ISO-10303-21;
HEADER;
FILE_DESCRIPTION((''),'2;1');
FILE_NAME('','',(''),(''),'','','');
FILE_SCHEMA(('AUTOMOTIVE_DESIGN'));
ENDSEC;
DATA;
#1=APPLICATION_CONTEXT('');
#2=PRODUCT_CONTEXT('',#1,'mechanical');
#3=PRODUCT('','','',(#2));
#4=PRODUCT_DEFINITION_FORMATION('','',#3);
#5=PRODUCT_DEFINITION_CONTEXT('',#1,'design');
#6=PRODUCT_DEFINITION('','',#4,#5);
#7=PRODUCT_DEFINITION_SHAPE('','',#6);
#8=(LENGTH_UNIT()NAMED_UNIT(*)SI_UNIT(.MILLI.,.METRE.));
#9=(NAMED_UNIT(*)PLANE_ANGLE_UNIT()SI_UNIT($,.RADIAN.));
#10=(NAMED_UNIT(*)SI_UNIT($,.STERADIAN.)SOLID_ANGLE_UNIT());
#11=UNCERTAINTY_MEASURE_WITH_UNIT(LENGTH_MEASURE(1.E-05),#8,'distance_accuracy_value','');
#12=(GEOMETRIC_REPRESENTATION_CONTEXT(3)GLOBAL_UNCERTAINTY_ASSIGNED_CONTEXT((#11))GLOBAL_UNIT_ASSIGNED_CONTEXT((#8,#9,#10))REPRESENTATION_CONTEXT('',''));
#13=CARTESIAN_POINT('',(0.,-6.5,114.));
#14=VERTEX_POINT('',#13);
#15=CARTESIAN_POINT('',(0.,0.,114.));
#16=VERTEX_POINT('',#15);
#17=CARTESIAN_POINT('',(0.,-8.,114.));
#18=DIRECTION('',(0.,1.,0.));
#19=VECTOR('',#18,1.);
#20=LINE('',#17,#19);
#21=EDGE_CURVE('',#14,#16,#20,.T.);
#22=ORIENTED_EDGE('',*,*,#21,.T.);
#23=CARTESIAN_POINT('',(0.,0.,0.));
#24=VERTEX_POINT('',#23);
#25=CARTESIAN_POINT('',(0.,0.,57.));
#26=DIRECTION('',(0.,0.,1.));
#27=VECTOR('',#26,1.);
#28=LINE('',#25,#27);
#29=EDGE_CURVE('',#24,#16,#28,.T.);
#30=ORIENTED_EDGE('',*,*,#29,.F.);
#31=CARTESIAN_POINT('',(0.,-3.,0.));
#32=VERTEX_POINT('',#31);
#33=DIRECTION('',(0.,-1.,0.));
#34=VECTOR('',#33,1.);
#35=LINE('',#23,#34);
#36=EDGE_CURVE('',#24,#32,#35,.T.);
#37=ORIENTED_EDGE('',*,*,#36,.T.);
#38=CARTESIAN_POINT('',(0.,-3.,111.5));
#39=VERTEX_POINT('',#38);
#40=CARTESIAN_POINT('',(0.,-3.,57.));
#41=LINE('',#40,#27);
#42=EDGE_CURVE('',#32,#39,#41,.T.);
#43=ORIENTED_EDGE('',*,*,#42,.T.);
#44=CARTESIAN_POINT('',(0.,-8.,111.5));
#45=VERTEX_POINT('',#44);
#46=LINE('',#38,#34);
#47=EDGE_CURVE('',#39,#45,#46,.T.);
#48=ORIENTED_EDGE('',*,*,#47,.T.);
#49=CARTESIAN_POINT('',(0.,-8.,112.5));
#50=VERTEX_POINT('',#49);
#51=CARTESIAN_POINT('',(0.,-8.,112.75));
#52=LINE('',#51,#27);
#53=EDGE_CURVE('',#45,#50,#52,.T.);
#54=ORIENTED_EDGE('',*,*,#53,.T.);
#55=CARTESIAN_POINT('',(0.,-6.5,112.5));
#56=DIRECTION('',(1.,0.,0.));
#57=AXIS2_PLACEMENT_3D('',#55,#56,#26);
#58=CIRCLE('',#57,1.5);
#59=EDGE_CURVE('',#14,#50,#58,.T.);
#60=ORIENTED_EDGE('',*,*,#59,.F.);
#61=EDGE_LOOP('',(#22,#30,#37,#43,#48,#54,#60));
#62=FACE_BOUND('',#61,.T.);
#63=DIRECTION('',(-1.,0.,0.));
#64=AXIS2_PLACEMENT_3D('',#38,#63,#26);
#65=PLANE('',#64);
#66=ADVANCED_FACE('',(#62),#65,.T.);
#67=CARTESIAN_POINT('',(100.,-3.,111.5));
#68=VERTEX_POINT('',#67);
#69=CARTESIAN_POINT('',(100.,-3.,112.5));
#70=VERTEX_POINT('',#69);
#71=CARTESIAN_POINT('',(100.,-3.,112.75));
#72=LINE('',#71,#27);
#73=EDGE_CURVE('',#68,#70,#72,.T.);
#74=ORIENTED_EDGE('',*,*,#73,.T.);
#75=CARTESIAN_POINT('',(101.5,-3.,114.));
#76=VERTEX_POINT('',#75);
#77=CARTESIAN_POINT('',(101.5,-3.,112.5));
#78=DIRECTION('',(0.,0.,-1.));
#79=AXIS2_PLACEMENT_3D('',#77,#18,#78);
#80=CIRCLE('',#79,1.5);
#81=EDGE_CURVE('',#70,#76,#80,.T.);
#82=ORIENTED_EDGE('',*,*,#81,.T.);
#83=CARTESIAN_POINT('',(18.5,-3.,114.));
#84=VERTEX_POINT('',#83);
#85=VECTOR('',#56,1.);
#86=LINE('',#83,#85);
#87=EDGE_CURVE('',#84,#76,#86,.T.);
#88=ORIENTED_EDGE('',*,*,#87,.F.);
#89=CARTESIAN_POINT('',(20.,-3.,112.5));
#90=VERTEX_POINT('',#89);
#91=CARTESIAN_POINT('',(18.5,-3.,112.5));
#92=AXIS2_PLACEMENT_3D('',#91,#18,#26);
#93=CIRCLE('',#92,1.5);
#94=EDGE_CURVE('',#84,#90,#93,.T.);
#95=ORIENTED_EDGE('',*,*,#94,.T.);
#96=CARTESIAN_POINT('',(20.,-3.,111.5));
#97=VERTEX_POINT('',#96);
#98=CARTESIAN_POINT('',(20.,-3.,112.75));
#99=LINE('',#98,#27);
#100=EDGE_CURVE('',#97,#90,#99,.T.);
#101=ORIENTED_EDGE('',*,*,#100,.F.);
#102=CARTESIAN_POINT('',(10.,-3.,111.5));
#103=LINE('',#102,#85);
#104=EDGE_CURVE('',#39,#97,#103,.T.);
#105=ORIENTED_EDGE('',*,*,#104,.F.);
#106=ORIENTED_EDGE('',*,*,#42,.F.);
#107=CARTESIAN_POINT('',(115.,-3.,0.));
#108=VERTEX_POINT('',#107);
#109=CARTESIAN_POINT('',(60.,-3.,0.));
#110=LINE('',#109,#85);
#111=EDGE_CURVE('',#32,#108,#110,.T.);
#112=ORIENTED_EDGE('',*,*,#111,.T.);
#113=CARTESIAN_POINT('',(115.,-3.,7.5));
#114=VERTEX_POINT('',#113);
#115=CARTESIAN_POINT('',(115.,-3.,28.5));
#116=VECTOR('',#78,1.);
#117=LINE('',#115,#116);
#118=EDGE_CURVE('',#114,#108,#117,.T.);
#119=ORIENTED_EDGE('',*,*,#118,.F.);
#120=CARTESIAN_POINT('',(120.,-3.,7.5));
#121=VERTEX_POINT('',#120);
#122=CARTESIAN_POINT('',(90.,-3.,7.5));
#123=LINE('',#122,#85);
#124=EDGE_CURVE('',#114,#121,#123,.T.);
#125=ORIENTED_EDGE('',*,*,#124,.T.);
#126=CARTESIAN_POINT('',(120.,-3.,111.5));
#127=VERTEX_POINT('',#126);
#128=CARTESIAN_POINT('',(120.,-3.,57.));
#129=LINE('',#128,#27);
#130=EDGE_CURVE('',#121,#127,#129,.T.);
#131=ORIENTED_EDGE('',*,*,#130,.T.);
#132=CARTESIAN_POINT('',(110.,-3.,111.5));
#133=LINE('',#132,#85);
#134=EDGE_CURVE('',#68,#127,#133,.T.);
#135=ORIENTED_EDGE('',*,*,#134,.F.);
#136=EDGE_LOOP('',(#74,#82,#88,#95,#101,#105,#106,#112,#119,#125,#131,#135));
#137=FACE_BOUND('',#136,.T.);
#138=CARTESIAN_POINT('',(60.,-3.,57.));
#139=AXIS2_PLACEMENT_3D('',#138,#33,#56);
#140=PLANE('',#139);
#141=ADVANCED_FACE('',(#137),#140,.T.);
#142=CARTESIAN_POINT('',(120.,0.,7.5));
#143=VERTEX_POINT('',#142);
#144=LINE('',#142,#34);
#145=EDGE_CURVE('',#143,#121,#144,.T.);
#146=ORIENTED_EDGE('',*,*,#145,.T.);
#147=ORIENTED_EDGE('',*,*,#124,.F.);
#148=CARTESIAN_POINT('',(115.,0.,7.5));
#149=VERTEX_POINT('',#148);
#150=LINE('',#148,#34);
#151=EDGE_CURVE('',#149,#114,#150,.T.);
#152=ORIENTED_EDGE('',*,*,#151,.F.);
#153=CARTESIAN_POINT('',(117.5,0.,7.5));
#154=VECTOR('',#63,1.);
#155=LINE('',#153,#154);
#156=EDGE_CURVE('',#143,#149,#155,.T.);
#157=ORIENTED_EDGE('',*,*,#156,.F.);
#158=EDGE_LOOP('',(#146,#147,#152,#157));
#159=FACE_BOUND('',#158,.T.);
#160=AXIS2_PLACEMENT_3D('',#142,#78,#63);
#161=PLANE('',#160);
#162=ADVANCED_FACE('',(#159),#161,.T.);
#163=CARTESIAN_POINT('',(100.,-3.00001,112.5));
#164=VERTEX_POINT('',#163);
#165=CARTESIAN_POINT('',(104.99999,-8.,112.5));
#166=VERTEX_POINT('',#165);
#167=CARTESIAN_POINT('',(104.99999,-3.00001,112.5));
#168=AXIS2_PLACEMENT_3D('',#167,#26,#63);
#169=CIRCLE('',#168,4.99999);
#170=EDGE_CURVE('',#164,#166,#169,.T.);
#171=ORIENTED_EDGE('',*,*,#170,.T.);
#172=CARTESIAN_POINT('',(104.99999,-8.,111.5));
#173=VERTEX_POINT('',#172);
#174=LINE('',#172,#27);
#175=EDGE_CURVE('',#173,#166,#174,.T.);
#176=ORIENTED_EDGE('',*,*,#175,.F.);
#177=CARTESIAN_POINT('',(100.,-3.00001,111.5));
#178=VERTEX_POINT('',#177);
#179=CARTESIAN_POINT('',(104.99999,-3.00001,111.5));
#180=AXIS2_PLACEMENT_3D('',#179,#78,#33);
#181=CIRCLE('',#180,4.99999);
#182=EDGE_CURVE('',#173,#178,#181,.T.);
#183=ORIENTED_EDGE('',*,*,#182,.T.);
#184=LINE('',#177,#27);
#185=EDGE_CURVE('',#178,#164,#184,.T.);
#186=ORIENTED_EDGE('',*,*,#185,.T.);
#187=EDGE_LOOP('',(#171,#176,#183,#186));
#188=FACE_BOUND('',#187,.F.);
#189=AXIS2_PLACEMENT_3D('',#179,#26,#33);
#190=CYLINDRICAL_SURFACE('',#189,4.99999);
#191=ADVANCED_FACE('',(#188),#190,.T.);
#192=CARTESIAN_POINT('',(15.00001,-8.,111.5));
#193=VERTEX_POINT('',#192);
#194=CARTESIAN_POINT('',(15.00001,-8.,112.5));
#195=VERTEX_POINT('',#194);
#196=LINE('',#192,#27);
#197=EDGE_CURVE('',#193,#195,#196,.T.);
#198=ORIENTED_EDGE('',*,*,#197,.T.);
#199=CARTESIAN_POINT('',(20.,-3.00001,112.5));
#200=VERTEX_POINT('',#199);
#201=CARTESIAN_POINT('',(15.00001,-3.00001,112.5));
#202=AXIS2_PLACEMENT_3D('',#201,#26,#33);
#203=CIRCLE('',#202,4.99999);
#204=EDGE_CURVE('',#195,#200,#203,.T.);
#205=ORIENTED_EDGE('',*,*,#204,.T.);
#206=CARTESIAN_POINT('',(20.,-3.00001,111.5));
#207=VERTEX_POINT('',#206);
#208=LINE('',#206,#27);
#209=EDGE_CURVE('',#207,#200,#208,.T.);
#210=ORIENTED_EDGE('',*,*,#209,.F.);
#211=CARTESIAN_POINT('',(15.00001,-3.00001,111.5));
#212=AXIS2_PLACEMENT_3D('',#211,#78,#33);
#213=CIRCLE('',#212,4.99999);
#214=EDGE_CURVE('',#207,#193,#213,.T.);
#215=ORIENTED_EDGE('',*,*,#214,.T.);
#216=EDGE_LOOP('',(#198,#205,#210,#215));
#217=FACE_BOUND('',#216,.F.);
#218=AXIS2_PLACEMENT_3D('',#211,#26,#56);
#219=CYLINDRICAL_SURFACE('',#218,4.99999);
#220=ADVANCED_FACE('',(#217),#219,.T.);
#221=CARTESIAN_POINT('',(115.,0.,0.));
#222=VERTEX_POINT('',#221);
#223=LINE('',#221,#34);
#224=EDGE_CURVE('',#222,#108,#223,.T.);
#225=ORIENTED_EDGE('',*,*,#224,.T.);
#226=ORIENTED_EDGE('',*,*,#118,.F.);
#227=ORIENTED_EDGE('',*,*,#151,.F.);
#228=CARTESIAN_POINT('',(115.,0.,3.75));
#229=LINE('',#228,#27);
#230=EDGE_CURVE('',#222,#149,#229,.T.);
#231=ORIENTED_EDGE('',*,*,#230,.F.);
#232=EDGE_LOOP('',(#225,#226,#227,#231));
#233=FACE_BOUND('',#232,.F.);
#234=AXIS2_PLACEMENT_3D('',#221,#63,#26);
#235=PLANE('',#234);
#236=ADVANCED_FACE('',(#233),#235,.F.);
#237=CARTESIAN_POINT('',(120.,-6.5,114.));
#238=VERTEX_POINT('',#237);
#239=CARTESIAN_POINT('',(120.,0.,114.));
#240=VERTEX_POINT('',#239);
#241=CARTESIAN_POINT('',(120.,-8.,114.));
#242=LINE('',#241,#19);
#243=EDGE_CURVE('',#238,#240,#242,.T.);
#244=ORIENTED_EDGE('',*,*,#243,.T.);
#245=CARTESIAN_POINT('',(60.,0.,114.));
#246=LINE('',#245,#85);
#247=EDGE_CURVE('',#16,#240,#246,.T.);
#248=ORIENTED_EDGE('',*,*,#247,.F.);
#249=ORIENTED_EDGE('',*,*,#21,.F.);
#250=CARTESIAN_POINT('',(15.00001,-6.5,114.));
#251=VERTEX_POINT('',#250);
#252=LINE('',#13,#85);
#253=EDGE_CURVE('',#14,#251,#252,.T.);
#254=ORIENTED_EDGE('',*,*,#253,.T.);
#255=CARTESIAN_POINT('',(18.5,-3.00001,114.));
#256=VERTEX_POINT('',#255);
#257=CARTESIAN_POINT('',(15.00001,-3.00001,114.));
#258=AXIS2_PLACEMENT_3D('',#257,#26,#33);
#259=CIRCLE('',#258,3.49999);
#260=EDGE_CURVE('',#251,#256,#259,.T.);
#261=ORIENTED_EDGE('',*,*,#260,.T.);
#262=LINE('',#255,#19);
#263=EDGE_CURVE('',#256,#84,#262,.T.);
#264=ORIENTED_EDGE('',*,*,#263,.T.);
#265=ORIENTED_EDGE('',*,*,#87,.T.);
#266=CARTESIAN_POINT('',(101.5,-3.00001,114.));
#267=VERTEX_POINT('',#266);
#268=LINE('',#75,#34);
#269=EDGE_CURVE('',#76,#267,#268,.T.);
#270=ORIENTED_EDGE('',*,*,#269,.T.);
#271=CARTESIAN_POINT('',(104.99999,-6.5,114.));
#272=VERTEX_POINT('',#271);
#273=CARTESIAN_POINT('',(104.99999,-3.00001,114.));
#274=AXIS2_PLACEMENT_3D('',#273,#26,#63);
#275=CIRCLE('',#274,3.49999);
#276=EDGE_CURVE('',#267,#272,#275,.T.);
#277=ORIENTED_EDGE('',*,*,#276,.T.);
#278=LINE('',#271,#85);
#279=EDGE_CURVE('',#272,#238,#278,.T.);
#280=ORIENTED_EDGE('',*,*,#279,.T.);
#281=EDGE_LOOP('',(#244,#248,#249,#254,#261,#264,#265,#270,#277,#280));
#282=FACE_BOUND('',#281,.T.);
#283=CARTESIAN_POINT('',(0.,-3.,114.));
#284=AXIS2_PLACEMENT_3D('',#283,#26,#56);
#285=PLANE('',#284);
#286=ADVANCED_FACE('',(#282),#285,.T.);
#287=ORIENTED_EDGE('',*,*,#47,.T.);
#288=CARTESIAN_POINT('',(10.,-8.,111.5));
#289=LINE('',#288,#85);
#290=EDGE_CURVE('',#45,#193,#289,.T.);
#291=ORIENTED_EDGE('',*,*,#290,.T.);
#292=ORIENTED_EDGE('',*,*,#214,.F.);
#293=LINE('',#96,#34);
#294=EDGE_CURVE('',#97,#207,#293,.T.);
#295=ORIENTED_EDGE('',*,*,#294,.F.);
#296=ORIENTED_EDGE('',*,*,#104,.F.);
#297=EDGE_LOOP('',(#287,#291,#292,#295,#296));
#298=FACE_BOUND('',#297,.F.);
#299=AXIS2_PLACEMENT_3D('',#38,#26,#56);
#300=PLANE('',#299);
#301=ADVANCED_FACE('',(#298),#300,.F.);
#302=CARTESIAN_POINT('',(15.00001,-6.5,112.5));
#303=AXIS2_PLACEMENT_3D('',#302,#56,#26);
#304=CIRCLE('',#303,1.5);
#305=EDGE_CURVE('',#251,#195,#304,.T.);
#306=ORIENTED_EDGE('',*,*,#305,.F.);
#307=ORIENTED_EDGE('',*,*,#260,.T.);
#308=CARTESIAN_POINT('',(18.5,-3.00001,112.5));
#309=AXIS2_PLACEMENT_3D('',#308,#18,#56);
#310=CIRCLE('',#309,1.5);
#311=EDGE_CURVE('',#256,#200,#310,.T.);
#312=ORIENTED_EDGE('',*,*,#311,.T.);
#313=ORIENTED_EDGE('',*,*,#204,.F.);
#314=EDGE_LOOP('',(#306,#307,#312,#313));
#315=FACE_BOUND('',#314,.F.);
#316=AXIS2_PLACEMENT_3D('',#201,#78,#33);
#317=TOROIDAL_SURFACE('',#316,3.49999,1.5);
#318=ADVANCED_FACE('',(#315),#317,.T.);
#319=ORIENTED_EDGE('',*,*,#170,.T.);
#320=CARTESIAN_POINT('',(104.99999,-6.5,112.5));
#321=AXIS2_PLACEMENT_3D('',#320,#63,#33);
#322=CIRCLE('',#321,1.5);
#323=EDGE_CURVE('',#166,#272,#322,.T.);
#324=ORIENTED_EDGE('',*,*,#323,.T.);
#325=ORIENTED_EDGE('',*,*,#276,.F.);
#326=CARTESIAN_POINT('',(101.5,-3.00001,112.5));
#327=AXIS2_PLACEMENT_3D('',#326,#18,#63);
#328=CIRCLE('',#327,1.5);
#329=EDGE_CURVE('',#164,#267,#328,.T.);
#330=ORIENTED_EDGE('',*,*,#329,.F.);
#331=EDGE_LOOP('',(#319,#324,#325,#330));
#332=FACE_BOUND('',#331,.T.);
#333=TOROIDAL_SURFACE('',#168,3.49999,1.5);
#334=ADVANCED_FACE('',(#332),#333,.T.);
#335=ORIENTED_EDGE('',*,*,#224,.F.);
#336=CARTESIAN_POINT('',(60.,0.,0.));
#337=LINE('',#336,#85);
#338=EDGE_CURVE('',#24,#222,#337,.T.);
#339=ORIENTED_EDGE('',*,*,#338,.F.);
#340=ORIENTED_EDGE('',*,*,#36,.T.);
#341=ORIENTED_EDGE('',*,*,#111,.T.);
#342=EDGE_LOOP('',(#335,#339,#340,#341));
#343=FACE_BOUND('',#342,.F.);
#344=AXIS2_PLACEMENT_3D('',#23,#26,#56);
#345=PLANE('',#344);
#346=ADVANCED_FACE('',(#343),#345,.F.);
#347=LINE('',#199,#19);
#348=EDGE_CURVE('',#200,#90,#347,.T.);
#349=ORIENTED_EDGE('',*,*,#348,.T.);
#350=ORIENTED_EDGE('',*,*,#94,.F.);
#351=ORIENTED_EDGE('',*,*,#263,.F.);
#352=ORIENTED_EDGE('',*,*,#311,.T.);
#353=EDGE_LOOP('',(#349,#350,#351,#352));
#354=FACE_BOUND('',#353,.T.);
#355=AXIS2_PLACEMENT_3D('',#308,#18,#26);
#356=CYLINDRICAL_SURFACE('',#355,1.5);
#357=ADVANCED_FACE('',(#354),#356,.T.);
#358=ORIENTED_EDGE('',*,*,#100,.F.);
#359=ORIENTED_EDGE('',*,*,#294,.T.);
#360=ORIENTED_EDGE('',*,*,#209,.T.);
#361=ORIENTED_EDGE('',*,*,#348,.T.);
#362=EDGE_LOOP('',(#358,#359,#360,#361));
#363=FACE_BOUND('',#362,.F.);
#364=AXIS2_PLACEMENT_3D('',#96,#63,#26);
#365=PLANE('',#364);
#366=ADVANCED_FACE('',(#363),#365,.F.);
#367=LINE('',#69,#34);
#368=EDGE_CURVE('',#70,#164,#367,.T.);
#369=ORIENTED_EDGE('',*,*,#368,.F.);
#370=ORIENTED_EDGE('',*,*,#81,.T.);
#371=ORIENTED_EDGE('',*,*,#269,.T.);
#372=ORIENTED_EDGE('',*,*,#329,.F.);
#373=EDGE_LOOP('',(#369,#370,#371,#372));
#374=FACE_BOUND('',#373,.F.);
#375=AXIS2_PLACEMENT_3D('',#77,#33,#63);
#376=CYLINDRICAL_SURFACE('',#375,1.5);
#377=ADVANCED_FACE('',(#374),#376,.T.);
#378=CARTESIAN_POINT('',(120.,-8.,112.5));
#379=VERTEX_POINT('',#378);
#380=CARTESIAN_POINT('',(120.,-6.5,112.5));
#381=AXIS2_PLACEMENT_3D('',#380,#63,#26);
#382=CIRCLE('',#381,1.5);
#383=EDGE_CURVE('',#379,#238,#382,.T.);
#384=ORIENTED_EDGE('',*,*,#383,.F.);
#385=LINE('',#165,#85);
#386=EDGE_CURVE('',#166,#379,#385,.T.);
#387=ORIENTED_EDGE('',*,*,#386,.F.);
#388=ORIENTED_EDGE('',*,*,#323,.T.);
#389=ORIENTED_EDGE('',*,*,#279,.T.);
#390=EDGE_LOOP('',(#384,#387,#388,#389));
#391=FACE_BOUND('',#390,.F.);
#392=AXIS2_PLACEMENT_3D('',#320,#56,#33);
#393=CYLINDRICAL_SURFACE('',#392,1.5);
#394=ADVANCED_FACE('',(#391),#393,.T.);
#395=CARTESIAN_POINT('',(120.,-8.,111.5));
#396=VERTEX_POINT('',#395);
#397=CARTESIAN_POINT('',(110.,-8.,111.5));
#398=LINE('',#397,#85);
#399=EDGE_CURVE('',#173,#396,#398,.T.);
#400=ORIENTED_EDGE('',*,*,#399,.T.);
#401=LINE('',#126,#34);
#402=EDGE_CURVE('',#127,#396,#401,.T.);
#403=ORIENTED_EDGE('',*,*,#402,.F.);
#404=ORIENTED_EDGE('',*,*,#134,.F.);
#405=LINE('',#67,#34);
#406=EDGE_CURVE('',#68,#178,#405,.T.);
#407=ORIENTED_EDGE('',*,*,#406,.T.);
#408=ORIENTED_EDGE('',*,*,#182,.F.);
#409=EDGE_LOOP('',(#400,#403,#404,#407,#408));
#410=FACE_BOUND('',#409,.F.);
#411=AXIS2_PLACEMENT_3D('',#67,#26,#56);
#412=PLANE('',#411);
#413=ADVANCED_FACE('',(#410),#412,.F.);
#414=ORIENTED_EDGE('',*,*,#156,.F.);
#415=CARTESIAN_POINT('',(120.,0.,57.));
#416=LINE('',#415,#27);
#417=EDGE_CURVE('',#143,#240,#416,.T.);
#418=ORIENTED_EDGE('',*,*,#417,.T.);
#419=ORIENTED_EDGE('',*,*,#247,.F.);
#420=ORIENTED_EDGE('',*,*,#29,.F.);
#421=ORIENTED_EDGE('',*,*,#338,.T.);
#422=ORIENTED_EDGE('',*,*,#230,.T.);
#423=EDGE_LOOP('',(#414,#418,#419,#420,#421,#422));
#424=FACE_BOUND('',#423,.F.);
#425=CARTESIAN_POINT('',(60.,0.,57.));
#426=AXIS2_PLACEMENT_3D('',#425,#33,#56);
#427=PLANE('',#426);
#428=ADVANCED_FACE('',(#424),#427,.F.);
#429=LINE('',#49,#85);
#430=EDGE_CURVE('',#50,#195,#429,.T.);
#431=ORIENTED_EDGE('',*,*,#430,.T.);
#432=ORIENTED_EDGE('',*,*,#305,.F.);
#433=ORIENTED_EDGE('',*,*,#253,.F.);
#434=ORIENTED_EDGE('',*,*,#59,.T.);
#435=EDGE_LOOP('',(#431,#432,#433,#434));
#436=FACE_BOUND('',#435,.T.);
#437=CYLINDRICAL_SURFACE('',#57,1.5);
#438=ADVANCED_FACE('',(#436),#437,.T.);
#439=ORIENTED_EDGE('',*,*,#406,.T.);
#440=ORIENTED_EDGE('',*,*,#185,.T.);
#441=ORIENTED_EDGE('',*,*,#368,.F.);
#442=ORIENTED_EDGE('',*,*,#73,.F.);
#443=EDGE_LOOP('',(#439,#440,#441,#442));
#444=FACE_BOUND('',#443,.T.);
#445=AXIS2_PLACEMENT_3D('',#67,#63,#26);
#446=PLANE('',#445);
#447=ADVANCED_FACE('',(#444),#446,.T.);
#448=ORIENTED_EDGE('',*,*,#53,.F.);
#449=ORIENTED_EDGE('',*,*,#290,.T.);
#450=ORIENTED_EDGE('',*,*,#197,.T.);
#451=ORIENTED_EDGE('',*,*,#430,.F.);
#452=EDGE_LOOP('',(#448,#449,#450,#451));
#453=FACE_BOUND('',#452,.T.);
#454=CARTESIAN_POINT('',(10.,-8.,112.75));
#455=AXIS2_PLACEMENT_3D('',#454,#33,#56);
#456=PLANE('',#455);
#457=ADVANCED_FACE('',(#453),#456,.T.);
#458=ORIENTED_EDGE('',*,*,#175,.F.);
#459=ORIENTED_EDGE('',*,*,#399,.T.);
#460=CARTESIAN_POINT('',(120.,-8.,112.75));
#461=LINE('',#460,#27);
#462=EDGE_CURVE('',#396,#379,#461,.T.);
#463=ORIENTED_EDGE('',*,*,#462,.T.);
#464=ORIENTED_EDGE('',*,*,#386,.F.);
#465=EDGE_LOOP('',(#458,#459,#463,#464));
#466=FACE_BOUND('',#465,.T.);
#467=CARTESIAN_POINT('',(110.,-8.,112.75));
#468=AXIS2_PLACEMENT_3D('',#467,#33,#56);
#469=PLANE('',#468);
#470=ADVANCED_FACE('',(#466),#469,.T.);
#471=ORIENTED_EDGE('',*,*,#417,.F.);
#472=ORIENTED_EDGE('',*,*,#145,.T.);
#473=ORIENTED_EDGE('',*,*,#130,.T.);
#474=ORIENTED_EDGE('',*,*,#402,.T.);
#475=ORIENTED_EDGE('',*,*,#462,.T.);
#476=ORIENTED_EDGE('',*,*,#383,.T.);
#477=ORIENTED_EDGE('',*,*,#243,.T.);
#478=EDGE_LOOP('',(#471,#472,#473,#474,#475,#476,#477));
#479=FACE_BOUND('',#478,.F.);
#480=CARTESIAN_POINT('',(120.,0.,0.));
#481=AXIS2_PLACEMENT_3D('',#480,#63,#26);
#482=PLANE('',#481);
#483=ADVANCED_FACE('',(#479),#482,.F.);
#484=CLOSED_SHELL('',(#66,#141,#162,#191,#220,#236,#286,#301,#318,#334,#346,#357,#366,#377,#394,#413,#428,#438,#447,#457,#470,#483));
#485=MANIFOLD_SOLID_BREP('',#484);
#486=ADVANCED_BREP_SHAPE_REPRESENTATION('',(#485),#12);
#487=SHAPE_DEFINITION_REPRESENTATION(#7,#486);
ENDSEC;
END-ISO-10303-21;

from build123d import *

# Parameters (mm, degrees)
F0_W     = 120
F0_H     = 114
F1_DEPTH = 3
F2_W     = 20
F2_H     = 2.5
F3_DEPTH = 5
F4_R     = 4.99999
F5_R     = 1.5
F6_W     = 5
F6_H     = 7.5
F7_DEPTH = 25


# Not quite as in the source:
# - a fillet or chamfer is up to 0.001 mm smaller than in the source, because OpenCascade refuses the exact size


with BuildPart() as f1:
    # F0 (on Front) → F1 (new body)
    with BuildSketch(Plane.XZ):
        with Locations((60, 57)):
            Rectangle(F0_W, F0_H)
    extrude(amount=F1_DEPTH)

    # F2 (on face) → F3 (join)
    with BuildSketch(Plane.XZ.offset(3)):
        with Locations((10, 112.75)):
            Rectangle(F2_W, F2_H)
        with Locations((110, 112.75)):
            Rectangle(F2_W, F2_H)
    extrude(amount=F3_DEPTH)

    # F4 (radius 5 in the source; OpenCascade refuses exactly that, so slightly less here)
    f4_edges = [f1.edges().sort_by_distance(p)[0] for p in [
        (20, -8, 112.75),
        (100, -8, 112.75),
    ]]
    fillet(f4_edges, radius=F4_R)

    # F5
    f5_edges = [f1.edges().sort_by_distance(p)[0] for p in [
        (7.500005, -8, 114),
        (112.499995, -8, 114),
    ]]
    fillet(f5_edges, radius=F5_R)

    # F6 (on face) → F7 (cut)
    with BuildSketch(Plane(origin=(0, 0, 0), x_dir=(-1, 0, 0), z_dir=(0, 1, 0))):
        with Locations((-117.5, 3.75)):
            Rectangle(F6_W, F6_H)
    extrude(amount=-F7_DEPTH, mode=Mode.SUBTRACT)


solid = f1.part
